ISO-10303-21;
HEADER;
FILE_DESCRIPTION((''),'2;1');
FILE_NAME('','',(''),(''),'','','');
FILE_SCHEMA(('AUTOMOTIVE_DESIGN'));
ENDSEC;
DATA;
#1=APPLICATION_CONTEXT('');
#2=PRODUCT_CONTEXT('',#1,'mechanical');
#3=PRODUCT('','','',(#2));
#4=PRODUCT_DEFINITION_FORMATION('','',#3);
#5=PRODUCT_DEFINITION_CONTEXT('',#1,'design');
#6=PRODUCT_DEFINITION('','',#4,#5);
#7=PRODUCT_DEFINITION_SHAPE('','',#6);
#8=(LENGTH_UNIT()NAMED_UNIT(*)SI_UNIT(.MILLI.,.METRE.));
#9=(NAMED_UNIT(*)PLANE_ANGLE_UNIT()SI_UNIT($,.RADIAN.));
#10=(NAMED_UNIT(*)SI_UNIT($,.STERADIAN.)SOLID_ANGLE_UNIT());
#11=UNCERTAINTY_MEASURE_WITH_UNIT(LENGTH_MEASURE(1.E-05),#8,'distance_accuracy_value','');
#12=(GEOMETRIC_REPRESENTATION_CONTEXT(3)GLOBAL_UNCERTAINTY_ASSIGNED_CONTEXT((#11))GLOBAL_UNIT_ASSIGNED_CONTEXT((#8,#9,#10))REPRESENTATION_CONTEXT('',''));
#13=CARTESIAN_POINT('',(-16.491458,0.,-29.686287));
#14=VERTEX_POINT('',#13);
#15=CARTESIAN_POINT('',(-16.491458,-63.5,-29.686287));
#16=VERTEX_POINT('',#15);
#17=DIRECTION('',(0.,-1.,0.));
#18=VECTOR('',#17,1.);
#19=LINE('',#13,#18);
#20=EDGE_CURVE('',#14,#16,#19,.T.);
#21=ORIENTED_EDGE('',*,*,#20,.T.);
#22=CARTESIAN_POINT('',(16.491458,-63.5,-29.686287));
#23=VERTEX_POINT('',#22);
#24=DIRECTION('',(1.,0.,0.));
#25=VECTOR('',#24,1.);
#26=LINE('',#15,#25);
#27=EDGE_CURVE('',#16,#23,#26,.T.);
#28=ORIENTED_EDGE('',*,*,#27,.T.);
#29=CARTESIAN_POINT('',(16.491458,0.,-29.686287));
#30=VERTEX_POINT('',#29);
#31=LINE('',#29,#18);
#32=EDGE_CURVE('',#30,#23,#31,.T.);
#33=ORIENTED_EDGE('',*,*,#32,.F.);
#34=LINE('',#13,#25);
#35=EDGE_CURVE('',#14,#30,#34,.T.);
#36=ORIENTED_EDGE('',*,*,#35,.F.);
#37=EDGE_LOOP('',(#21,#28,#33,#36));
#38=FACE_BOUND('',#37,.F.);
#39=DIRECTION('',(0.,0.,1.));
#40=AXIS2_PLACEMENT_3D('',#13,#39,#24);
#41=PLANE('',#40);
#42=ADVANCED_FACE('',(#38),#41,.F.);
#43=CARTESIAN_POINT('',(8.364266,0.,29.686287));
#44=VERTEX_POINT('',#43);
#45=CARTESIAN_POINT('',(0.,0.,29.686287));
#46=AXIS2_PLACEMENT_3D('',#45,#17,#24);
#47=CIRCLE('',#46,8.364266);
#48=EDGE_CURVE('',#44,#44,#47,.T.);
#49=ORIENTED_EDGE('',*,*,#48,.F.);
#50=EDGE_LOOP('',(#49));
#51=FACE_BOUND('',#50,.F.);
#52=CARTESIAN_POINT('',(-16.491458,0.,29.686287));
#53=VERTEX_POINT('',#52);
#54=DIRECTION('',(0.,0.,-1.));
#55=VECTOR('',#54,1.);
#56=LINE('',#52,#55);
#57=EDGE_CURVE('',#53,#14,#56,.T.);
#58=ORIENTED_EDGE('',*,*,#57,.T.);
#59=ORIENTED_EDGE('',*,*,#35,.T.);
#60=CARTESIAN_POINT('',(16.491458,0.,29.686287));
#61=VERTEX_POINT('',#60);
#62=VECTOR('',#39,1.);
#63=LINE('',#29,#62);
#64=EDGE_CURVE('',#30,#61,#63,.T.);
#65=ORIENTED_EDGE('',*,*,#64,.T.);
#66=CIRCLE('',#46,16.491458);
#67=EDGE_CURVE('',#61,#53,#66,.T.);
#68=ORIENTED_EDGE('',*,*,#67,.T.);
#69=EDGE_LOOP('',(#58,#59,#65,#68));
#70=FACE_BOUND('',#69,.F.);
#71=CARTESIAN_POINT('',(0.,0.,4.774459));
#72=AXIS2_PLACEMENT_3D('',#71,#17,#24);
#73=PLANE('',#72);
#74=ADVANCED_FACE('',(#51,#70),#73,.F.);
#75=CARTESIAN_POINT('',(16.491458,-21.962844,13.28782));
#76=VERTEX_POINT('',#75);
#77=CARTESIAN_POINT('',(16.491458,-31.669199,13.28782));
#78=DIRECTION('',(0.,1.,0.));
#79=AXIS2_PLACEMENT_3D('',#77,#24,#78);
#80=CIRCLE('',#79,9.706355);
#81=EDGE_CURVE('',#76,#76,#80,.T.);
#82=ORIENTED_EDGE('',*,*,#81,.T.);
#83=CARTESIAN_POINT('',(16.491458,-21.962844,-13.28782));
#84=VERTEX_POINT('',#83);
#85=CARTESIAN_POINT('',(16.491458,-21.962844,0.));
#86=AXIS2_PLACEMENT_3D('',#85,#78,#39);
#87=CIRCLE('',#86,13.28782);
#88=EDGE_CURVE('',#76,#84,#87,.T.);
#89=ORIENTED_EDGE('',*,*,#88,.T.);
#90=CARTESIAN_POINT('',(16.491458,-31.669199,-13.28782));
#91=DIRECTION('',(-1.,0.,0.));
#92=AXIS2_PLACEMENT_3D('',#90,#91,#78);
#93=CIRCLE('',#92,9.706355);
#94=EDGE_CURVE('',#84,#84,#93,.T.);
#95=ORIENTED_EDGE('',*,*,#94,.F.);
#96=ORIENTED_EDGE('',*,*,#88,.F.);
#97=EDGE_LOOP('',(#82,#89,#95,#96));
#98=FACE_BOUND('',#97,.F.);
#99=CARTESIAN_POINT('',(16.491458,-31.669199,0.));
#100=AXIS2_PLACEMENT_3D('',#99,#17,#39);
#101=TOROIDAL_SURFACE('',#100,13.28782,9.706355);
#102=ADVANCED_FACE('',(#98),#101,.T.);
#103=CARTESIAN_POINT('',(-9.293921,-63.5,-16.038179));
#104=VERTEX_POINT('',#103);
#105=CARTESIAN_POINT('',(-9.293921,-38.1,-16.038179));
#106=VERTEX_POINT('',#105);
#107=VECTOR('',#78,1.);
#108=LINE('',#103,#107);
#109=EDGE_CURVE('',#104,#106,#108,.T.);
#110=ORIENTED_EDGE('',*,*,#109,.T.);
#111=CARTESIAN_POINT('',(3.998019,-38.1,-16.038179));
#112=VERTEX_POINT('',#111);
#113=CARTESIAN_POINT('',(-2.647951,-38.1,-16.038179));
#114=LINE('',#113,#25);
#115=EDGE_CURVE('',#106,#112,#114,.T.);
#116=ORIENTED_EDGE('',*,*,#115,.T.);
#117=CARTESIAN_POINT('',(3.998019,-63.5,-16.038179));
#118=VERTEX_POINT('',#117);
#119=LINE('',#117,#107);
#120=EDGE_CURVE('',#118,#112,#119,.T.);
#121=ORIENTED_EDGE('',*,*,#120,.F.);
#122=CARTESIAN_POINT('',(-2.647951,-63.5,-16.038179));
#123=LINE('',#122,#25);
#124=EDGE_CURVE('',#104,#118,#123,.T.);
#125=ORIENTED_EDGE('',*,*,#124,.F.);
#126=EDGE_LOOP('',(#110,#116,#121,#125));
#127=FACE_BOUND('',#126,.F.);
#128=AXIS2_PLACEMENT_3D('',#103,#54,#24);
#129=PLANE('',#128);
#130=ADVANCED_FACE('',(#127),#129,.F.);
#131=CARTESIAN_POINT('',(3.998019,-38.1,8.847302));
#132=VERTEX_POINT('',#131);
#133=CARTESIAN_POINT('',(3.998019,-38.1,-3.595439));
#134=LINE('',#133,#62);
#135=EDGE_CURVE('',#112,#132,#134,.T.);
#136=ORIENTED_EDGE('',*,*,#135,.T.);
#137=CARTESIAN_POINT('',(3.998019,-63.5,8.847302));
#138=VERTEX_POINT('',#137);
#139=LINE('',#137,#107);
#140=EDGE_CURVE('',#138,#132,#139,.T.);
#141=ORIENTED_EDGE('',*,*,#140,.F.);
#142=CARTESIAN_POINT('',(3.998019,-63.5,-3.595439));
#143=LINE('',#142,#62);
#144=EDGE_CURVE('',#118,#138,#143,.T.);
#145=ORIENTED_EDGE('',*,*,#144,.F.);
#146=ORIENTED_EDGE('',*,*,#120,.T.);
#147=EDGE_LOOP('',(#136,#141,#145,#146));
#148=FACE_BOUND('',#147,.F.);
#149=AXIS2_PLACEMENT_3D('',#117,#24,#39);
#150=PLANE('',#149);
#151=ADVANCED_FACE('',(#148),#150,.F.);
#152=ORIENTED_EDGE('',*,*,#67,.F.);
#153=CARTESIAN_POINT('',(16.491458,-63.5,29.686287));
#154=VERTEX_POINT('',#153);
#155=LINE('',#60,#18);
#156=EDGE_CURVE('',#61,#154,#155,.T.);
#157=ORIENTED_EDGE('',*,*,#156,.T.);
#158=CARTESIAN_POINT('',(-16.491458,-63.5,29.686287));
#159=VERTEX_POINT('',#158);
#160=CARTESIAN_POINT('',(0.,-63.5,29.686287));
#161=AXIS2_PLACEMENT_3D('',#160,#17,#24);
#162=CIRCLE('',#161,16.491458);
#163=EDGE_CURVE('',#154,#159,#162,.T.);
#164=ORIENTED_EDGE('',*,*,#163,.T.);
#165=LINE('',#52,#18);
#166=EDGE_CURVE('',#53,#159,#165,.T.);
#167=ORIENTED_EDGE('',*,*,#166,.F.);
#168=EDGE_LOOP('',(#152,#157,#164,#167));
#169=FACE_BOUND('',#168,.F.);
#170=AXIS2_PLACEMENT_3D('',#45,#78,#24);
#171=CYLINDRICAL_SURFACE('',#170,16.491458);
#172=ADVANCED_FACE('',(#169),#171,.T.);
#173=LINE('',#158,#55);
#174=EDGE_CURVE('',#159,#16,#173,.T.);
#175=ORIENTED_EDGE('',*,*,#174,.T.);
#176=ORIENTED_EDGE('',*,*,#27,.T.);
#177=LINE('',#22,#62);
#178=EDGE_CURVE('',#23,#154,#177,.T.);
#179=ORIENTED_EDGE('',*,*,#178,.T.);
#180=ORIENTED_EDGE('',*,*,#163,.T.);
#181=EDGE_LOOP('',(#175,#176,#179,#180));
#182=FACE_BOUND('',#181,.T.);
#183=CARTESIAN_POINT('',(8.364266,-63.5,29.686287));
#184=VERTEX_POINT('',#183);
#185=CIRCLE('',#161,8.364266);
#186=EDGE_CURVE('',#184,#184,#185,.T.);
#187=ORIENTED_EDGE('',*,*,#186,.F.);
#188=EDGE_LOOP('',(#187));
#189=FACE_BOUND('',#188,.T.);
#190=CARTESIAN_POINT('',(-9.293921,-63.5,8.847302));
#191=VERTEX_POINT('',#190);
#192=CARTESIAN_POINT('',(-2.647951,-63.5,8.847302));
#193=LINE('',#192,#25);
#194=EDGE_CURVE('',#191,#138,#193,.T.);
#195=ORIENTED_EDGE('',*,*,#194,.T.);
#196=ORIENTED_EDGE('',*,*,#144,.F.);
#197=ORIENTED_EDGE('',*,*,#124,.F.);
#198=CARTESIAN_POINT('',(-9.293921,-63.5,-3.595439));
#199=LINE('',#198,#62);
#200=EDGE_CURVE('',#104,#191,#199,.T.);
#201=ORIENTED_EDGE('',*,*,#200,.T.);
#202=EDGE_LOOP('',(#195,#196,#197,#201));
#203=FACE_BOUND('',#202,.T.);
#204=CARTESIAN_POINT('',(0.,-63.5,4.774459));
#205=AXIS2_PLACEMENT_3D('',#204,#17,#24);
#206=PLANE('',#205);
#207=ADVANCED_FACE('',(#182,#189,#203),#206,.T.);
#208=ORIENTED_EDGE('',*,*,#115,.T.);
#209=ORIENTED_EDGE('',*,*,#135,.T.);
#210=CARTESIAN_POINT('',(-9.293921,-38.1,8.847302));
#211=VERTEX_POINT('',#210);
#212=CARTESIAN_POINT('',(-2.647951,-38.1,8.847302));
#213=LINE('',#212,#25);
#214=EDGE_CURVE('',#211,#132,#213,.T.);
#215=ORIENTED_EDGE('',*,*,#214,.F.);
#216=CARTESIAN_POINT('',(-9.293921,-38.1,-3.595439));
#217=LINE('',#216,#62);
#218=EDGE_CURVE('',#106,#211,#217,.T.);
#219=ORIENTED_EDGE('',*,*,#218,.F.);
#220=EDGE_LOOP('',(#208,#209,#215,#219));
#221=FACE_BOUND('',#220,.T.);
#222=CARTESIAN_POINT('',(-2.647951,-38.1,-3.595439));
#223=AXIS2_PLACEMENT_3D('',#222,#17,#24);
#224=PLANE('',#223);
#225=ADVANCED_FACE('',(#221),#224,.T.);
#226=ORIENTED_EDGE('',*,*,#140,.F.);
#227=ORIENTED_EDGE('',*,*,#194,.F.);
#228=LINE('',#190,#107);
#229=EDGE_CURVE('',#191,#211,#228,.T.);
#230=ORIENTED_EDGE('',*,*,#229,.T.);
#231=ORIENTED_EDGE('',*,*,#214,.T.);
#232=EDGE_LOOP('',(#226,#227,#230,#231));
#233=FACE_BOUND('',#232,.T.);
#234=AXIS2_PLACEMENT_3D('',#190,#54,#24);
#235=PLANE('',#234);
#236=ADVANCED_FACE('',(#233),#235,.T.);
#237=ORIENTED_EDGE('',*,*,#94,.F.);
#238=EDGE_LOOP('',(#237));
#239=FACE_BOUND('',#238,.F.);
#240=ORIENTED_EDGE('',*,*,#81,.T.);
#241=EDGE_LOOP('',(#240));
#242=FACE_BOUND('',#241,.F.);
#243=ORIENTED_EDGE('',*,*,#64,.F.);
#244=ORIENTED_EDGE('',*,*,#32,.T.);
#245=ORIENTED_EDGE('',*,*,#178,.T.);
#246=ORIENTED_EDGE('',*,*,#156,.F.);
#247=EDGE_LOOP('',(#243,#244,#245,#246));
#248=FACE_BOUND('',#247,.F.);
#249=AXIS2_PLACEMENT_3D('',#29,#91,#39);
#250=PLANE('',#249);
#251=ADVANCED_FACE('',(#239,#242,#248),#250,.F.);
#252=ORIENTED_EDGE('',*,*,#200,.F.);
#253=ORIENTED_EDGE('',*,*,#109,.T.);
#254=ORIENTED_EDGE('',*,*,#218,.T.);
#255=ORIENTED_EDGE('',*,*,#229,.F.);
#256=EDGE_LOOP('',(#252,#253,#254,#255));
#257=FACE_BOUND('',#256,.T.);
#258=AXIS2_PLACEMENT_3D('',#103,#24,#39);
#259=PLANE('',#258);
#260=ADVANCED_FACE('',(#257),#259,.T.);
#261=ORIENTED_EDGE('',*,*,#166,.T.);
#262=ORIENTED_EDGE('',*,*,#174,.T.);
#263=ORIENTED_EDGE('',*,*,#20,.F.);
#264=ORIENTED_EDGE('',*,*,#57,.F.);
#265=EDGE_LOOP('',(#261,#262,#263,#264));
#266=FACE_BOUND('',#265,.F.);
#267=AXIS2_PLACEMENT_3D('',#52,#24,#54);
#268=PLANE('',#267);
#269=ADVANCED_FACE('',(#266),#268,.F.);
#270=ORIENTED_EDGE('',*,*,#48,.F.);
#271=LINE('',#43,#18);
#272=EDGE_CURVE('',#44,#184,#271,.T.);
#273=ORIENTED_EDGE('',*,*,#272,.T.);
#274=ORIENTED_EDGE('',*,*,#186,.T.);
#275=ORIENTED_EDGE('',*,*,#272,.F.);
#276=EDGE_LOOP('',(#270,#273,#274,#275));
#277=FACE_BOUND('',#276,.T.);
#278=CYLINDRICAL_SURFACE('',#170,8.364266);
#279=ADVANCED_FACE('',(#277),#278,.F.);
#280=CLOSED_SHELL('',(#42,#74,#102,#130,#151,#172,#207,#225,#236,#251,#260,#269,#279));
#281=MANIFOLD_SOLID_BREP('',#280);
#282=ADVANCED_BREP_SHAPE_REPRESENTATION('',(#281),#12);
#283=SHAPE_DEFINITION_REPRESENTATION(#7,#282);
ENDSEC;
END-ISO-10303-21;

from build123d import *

# Parameters (mm, degrees)
F0_R     = 8.3642663508
F1_DEPTH = 63.5
F2_W     = 13.291940093
F2_H     = 24.8854812235
F3_DEPTH = 25.4
F4_R     = 9.7063550573
F5_ANGLE = 180


# Not quite as in the source:
# - a feature names something its author has since deleted; it is built from what else it names


with BuildPart() as f1:
    # F0 (on Front) → F1 (new body)
    with BuildSketch(Plane.XZ):
        with BuildLine():
            Line((-16.4914578199, -29.6862870455), (16.4914578199, -29.6862870455))
            Line((16.4914578199, -29.6862870455), (16.4914578199, 29.6862870455))
            ThreePointArc((16.4914578199, 29.6862870455), (0, 46.1777448654), (-16.4914578199, 29.6862870455))
            Line((-16.4914578199, 29.6862870455), (-16.4914578199, -29.6862870455))
        make_face()
        with Locations((0, 29.6862870455)):
            Circle(F0_R, mode=Mode.SUBTRACT)
    extrude(amount=F1_DEPTH)

    # F2 (on face) → F3 (cut)
    with BuildSketch(Plane.XZ.offset(63.5)):
        with Locations((-2.6479512453, -3.5954387859)):
            Rectangle(F2_W, F2_H)
    extrude(amount=-F3_DEPTH, mode=Mode.SUBTRACT)

    # F4 (on face) → F5 (revolve)
    with BuildSketch(Plane.YZ.offset(16.4914578199)):
        with Locations((-31.6691994667, 13.287819922)):
            Circle(F4_R)
    revolve(axis=Axis((16.4914578199, -31.75, 0), (0, 1, 0)), revolution_arc=F5_ANGLE)


solid = f1.part
